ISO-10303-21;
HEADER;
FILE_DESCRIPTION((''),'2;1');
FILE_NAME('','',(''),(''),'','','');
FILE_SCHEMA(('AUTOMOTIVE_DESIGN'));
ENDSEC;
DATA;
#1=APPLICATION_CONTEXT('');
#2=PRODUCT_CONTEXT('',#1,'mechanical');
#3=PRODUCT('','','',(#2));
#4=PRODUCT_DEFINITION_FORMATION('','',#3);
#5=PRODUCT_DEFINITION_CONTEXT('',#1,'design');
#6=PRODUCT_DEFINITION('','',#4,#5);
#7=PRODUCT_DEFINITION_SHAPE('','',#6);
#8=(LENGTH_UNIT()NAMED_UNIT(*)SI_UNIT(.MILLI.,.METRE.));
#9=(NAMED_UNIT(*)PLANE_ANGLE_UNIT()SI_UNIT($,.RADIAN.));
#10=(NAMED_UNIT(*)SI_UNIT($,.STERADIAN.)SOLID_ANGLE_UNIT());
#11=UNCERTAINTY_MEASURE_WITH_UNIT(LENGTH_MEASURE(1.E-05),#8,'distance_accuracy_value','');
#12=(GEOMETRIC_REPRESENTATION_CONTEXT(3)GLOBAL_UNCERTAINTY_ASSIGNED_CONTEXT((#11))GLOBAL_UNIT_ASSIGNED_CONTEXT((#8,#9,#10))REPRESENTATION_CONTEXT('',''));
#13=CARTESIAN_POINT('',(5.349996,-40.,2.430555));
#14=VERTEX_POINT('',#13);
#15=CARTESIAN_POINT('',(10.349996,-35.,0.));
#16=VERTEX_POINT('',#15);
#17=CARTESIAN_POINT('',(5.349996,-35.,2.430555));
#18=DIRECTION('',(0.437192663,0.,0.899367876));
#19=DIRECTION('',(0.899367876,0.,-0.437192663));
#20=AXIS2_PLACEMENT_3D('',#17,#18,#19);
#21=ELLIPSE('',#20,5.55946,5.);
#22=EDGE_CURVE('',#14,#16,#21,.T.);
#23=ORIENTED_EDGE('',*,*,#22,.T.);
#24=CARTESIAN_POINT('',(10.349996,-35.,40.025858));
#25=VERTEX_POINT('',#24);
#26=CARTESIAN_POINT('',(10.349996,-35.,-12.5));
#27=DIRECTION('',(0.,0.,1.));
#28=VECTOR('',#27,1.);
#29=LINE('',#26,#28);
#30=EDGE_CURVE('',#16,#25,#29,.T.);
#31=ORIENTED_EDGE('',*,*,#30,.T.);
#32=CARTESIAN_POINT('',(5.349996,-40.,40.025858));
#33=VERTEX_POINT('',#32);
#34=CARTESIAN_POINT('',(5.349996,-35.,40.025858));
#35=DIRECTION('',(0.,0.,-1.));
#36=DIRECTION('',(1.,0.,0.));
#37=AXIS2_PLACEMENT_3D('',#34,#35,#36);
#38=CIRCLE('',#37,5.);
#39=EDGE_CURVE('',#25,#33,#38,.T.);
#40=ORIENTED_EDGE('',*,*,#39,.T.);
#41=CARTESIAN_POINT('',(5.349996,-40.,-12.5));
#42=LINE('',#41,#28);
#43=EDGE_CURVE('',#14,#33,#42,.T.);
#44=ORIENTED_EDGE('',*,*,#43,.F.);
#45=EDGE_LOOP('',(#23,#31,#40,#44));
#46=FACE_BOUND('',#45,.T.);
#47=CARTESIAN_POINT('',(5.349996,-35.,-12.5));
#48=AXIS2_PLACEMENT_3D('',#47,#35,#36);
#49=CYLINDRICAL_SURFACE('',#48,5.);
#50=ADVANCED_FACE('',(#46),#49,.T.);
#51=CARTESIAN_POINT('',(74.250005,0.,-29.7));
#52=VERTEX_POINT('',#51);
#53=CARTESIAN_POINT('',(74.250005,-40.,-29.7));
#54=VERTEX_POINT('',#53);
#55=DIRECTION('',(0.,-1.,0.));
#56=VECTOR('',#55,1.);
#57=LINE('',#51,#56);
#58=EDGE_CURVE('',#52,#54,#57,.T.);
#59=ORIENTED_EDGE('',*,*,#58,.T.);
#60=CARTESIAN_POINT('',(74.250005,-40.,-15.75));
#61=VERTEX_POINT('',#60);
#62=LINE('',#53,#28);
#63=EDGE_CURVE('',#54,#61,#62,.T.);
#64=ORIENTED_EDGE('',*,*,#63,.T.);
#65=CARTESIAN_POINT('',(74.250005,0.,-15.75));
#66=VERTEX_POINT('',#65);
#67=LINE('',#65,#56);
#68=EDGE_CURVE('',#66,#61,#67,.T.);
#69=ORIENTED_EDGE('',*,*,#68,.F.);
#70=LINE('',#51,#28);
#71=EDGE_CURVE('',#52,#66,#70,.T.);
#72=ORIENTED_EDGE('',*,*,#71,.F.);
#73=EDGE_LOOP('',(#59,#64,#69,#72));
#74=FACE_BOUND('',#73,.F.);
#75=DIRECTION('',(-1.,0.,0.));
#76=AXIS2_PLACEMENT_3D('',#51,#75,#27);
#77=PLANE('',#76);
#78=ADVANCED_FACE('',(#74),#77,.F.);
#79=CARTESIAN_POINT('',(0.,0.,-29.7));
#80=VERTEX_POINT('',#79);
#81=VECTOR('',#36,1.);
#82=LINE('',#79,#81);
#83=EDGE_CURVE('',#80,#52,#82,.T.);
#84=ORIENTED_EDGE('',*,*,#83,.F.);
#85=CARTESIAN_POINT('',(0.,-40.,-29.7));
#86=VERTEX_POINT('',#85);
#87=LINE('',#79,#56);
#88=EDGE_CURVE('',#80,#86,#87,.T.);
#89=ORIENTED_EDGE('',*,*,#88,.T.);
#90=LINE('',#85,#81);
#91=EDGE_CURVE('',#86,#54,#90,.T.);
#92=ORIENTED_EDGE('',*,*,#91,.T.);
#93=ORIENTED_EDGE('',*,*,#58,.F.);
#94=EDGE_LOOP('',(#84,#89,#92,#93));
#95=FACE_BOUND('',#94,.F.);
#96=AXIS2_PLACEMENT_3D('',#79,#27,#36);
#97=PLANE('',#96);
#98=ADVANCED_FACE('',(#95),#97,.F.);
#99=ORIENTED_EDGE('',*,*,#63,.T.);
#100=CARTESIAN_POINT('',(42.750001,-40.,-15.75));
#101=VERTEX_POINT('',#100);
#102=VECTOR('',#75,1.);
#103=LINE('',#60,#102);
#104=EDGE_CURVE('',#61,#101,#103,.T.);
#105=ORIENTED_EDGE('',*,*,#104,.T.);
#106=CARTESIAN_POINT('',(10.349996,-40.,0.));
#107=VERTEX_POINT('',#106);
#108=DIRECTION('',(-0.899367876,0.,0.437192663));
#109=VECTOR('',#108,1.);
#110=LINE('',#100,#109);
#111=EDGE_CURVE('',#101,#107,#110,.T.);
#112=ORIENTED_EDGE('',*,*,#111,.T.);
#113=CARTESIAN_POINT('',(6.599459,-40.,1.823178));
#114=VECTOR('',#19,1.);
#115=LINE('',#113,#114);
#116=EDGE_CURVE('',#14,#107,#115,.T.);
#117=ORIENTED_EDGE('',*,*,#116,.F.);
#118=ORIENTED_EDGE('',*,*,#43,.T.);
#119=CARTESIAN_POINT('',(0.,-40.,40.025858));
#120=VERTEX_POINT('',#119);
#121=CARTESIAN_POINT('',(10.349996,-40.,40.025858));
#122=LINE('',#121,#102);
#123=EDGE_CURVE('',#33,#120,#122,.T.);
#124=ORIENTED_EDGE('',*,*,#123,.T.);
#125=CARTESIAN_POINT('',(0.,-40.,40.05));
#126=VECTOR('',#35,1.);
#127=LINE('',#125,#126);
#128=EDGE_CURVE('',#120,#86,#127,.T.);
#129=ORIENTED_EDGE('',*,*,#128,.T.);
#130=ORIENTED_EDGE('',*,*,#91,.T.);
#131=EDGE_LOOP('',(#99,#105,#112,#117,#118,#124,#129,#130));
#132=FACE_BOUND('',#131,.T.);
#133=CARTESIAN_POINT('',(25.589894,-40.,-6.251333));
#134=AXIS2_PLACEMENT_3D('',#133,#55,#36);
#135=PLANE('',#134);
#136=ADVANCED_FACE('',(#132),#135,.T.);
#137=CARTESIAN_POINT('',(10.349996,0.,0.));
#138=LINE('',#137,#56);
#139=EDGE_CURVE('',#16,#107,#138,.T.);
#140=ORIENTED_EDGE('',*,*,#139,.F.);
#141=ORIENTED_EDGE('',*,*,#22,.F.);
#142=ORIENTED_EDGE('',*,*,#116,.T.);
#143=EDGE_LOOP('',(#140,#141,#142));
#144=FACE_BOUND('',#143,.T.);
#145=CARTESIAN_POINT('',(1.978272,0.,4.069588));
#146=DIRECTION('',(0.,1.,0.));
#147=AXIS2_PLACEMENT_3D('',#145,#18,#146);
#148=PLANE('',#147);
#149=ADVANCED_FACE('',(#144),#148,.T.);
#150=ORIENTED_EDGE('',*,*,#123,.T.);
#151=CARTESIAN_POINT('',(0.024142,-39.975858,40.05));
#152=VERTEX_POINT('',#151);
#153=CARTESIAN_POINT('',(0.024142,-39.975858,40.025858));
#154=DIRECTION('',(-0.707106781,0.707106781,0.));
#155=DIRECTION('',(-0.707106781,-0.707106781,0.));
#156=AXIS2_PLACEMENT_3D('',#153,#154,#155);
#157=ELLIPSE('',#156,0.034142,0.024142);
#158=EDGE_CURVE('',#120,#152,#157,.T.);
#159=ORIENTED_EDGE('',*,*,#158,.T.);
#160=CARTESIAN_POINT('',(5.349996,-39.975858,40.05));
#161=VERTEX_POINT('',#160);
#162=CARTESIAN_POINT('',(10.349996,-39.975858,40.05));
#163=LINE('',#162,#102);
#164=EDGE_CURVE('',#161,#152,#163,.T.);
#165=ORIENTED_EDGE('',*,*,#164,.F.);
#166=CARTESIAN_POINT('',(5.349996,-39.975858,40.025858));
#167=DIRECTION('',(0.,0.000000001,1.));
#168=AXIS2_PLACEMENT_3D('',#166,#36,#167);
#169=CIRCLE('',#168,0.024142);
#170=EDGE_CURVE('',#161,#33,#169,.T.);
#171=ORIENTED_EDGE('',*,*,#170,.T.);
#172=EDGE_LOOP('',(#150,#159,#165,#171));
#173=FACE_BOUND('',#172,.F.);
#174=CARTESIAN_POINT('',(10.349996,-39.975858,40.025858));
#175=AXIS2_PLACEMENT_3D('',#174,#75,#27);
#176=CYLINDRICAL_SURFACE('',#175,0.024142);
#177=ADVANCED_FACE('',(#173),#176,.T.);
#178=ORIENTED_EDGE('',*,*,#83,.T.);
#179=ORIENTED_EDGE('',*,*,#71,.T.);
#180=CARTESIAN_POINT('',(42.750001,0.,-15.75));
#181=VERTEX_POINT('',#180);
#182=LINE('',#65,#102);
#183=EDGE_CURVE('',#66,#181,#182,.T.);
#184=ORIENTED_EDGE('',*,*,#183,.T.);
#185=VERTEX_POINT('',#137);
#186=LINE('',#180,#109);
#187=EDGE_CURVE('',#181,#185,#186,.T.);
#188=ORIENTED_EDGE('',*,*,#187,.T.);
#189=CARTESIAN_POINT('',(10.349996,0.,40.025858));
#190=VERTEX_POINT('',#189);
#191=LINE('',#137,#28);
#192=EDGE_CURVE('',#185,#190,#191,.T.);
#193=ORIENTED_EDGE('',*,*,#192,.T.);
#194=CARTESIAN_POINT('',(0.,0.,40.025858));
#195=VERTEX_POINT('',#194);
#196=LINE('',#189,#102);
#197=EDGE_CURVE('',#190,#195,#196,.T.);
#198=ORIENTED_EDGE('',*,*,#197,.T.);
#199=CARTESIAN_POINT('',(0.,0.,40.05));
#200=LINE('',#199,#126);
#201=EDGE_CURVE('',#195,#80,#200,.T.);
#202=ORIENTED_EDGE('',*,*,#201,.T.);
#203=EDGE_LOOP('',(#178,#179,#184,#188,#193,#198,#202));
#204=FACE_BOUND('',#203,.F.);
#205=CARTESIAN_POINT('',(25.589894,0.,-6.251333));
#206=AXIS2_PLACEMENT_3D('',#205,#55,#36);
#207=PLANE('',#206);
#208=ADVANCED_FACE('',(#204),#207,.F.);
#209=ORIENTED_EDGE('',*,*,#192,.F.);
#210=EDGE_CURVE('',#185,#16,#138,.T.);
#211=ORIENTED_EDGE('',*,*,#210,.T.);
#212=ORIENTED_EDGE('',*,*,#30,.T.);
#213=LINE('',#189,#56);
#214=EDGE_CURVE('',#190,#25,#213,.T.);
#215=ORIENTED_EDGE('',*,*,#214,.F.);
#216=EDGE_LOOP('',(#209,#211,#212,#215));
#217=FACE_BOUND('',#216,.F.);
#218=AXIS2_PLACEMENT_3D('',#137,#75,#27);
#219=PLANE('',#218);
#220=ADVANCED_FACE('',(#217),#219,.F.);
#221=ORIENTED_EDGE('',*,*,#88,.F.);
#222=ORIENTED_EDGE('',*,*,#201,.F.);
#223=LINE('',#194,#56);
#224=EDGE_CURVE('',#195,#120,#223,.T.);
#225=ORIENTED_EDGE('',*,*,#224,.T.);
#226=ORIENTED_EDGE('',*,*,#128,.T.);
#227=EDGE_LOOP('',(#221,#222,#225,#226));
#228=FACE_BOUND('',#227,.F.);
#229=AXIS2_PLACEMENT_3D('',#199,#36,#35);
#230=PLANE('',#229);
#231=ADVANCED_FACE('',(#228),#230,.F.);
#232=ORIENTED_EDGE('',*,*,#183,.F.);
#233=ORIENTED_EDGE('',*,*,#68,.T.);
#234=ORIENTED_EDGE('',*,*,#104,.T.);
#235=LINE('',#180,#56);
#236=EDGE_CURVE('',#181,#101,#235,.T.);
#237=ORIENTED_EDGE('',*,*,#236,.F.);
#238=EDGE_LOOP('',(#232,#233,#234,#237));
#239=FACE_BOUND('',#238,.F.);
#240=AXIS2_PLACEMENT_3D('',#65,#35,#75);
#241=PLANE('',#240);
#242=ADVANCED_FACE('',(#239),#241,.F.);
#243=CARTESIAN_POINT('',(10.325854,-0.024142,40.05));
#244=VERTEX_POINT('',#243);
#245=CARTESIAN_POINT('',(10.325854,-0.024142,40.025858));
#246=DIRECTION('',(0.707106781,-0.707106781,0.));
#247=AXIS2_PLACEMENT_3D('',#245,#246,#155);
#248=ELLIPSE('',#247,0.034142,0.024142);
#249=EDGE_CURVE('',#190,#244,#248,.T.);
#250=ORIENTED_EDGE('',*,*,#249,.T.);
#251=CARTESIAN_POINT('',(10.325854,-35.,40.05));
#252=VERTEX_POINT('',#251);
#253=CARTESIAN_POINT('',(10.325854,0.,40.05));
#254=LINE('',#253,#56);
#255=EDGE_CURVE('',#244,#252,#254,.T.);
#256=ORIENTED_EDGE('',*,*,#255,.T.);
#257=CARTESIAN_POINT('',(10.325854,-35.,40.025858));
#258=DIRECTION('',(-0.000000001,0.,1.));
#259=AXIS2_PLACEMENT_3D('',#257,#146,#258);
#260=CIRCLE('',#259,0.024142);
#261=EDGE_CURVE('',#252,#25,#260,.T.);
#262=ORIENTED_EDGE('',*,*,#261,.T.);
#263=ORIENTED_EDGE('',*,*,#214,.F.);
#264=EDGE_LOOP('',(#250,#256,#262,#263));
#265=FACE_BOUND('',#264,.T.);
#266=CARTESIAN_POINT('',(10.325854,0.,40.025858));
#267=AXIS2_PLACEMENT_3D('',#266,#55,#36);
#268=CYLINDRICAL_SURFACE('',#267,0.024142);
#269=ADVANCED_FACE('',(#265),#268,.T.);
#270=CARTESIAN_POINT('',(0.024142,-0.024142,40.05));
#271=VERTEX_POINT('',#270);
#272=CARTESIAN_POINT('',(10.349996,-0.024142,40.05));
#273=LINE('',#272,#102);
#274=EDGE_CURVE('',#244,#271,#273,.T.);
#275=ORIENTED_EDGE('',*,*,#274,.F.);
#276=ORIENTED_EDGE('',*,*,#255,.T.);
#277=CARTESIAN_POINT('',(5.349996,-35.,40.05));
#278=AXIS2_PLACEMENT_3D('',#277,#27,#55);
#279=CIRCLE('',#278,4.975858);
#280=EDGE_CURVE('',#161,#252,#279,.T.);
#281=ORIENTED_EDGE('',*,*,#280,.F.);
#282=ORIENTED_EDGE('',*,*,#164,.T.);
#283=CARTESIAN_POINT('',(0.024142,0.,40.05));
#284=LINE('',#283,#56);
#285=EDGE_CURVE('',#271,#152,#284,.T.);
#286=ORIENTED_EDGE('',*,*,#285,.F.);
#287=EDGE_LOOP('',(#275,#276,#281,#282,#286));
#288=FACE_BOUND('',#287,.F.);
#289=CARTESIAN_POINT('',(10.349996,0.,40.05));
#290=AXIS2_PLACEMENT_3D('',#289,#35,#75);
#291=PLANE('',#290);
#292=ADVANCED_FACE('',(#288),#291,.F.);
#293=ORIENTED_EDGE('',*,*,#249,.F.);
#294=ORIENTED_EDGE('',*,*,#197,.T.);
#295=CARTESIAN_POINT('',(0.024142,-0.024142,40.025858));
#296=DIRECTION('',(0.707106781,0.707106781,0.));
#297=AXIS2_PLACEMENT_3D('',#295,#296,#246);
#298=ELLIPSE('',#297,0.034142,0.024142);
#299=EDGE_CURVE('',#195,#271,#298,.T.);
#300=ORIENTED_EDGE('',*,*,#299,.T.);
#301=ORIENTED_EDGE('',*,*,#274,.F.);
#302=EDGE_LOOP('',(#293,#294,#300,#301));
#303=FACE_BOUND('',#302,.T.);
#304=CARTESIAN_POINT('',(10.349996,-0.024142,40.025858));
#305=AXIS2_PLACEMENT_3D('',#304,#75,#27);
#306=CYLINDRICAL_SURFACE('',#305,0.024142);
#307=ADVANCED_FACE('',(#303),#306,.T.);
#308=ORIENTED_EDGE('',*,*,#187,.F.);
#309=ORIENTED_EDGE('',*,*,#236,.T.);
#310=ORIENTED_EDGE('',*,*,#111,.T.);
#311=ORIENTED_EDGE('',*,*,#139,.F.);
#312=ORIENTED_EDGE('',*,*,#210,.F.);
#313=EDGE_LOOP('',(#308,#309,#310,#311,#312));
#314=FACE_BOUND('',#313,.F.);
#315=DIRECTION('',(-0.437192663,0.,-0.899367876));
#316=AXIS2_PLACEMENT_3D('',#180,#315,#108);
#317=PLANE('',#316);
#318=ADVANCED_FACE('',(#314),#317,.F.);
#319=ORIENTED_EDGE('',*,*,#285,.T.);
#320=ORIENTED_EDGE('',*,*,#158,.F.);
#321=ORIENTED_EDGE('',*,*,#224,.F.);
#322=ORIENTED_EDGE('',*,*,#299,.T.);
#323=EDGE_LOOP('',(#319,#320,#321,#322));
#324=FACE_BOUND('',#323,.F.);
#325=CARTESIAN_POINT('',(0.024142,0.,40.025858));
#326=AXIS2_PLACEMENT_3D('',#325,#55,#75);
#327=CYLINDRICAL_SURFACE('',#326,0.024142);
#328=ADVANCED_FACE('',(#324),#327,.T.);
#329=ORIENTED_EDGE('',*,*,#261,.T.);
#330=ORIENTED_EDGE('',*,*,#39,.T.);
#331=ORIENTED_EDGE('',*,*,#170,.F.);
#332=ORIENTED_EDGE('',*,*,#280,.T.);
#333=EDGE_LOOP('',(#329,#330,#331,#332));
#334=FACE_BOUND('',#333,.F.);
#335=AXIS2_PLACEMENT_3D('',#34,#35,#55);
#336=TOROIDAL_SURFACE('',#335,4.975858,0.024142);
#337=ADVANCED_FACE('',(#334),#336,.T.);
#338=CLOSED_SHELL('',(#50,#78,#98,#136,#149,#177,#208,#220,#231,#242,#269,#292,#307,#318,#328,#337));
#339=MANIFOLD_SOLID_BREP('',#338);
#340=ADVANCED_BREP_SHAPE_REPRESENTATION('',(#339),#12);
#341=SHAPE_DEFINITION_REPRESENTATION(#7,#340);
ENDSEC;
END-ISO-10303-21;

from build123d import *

# Parameters (mm, degrees)
F1_DEPTH    = 40
F2_R        = 0.0241421356
F3_T2_ANGLE = 90
F3_T6_DEPTH = 52.5499999523


# Not quite as in the source:
# - a fillet or chamfer that OpenCascade refuses, or shapes differently, is made with other operations: its cross-section is extruded or revolved along the edge and cut away or added


with BuildPart() as f1:
    # F0 (on Front) → F1 (new body)
    with BuildSketch(Plane.XZ):
        Polygon((0, 40.0499999523), (0, 0), (0, -29.6999998391), (74.2500051856, -29.6999998391), (74.2500051856, -15.7500002533), (42.7500009537, -15.7500002533), (10.349996388, 0), (10.349996388, 40.0499999523), align=None)
    extrude(amount=F1_DEPTH)

    # F2
    f2_edges = [f1.edges().sort_by_distance(p)[0] for p in [
        (10.349996, -20, 40.05),
        (0, -20, 40.05),
        (5.174998, 0, 40.05),
        (5.174998, -40, 40.05),
    ]]
    fillet(f2_edges, radius=F2_R)

    # F3: fillet of radius 5 on 5 edges, made by hand

    # F3_s1 → F3_t2 (revolve, cut)
    with BuildSketch(Plane.YZ.offset(5.349996388)):
        with BuildLine():
            ThreePointArc((-39.9758578644, 40.0499999523), (-39.9929289322, 40.0429288845), (-40, 40.0258578167))
            Line((-40, 40.0258578167), (-40, 40.0499999523))
            Line((-40, 40.0499999523), (-39.9758578644, 40.0499999523))
        make_face()
    revolve(axis=Axis((5.349996388, -35, 40.0499999523), (0, 0, 1)), revolution_arc=F3_T2_ANGLE, mode=Mode.SUBTRACT)


with BuildPart() as f3_tool4:
    # F3_s5 → F3_t6 (new body)
    with BuildSketch(Plane.XY.offset(-12.5)):
        with BuildLine():
            ThreePointArc((10.349996388, -35), (8.8855302939, -38.5355339059), (5.349996388, -40))
            Line((5.349996388, -40), (10.349996388, -40))
            Line((10.349996388, -40), (10.349996388, -35))
        make_face()
    extrude(amount=F3_T6_DEPTH)

    split(bisect_by=Plane(origin=(1.9782716516, 0, 4.0695879055), x_dir=(0, 1, 0), z_dir=(0.4371926627, 0, 0.8993678756)), keep=Keep.TOP)


with BuildPart() as f1_1:
    add(f1.part)

    # F3_t3: cut F3_tool4
    add(f3_tool4.part, mode=Mode.SUBTRACT)


solid = f1_1.part
